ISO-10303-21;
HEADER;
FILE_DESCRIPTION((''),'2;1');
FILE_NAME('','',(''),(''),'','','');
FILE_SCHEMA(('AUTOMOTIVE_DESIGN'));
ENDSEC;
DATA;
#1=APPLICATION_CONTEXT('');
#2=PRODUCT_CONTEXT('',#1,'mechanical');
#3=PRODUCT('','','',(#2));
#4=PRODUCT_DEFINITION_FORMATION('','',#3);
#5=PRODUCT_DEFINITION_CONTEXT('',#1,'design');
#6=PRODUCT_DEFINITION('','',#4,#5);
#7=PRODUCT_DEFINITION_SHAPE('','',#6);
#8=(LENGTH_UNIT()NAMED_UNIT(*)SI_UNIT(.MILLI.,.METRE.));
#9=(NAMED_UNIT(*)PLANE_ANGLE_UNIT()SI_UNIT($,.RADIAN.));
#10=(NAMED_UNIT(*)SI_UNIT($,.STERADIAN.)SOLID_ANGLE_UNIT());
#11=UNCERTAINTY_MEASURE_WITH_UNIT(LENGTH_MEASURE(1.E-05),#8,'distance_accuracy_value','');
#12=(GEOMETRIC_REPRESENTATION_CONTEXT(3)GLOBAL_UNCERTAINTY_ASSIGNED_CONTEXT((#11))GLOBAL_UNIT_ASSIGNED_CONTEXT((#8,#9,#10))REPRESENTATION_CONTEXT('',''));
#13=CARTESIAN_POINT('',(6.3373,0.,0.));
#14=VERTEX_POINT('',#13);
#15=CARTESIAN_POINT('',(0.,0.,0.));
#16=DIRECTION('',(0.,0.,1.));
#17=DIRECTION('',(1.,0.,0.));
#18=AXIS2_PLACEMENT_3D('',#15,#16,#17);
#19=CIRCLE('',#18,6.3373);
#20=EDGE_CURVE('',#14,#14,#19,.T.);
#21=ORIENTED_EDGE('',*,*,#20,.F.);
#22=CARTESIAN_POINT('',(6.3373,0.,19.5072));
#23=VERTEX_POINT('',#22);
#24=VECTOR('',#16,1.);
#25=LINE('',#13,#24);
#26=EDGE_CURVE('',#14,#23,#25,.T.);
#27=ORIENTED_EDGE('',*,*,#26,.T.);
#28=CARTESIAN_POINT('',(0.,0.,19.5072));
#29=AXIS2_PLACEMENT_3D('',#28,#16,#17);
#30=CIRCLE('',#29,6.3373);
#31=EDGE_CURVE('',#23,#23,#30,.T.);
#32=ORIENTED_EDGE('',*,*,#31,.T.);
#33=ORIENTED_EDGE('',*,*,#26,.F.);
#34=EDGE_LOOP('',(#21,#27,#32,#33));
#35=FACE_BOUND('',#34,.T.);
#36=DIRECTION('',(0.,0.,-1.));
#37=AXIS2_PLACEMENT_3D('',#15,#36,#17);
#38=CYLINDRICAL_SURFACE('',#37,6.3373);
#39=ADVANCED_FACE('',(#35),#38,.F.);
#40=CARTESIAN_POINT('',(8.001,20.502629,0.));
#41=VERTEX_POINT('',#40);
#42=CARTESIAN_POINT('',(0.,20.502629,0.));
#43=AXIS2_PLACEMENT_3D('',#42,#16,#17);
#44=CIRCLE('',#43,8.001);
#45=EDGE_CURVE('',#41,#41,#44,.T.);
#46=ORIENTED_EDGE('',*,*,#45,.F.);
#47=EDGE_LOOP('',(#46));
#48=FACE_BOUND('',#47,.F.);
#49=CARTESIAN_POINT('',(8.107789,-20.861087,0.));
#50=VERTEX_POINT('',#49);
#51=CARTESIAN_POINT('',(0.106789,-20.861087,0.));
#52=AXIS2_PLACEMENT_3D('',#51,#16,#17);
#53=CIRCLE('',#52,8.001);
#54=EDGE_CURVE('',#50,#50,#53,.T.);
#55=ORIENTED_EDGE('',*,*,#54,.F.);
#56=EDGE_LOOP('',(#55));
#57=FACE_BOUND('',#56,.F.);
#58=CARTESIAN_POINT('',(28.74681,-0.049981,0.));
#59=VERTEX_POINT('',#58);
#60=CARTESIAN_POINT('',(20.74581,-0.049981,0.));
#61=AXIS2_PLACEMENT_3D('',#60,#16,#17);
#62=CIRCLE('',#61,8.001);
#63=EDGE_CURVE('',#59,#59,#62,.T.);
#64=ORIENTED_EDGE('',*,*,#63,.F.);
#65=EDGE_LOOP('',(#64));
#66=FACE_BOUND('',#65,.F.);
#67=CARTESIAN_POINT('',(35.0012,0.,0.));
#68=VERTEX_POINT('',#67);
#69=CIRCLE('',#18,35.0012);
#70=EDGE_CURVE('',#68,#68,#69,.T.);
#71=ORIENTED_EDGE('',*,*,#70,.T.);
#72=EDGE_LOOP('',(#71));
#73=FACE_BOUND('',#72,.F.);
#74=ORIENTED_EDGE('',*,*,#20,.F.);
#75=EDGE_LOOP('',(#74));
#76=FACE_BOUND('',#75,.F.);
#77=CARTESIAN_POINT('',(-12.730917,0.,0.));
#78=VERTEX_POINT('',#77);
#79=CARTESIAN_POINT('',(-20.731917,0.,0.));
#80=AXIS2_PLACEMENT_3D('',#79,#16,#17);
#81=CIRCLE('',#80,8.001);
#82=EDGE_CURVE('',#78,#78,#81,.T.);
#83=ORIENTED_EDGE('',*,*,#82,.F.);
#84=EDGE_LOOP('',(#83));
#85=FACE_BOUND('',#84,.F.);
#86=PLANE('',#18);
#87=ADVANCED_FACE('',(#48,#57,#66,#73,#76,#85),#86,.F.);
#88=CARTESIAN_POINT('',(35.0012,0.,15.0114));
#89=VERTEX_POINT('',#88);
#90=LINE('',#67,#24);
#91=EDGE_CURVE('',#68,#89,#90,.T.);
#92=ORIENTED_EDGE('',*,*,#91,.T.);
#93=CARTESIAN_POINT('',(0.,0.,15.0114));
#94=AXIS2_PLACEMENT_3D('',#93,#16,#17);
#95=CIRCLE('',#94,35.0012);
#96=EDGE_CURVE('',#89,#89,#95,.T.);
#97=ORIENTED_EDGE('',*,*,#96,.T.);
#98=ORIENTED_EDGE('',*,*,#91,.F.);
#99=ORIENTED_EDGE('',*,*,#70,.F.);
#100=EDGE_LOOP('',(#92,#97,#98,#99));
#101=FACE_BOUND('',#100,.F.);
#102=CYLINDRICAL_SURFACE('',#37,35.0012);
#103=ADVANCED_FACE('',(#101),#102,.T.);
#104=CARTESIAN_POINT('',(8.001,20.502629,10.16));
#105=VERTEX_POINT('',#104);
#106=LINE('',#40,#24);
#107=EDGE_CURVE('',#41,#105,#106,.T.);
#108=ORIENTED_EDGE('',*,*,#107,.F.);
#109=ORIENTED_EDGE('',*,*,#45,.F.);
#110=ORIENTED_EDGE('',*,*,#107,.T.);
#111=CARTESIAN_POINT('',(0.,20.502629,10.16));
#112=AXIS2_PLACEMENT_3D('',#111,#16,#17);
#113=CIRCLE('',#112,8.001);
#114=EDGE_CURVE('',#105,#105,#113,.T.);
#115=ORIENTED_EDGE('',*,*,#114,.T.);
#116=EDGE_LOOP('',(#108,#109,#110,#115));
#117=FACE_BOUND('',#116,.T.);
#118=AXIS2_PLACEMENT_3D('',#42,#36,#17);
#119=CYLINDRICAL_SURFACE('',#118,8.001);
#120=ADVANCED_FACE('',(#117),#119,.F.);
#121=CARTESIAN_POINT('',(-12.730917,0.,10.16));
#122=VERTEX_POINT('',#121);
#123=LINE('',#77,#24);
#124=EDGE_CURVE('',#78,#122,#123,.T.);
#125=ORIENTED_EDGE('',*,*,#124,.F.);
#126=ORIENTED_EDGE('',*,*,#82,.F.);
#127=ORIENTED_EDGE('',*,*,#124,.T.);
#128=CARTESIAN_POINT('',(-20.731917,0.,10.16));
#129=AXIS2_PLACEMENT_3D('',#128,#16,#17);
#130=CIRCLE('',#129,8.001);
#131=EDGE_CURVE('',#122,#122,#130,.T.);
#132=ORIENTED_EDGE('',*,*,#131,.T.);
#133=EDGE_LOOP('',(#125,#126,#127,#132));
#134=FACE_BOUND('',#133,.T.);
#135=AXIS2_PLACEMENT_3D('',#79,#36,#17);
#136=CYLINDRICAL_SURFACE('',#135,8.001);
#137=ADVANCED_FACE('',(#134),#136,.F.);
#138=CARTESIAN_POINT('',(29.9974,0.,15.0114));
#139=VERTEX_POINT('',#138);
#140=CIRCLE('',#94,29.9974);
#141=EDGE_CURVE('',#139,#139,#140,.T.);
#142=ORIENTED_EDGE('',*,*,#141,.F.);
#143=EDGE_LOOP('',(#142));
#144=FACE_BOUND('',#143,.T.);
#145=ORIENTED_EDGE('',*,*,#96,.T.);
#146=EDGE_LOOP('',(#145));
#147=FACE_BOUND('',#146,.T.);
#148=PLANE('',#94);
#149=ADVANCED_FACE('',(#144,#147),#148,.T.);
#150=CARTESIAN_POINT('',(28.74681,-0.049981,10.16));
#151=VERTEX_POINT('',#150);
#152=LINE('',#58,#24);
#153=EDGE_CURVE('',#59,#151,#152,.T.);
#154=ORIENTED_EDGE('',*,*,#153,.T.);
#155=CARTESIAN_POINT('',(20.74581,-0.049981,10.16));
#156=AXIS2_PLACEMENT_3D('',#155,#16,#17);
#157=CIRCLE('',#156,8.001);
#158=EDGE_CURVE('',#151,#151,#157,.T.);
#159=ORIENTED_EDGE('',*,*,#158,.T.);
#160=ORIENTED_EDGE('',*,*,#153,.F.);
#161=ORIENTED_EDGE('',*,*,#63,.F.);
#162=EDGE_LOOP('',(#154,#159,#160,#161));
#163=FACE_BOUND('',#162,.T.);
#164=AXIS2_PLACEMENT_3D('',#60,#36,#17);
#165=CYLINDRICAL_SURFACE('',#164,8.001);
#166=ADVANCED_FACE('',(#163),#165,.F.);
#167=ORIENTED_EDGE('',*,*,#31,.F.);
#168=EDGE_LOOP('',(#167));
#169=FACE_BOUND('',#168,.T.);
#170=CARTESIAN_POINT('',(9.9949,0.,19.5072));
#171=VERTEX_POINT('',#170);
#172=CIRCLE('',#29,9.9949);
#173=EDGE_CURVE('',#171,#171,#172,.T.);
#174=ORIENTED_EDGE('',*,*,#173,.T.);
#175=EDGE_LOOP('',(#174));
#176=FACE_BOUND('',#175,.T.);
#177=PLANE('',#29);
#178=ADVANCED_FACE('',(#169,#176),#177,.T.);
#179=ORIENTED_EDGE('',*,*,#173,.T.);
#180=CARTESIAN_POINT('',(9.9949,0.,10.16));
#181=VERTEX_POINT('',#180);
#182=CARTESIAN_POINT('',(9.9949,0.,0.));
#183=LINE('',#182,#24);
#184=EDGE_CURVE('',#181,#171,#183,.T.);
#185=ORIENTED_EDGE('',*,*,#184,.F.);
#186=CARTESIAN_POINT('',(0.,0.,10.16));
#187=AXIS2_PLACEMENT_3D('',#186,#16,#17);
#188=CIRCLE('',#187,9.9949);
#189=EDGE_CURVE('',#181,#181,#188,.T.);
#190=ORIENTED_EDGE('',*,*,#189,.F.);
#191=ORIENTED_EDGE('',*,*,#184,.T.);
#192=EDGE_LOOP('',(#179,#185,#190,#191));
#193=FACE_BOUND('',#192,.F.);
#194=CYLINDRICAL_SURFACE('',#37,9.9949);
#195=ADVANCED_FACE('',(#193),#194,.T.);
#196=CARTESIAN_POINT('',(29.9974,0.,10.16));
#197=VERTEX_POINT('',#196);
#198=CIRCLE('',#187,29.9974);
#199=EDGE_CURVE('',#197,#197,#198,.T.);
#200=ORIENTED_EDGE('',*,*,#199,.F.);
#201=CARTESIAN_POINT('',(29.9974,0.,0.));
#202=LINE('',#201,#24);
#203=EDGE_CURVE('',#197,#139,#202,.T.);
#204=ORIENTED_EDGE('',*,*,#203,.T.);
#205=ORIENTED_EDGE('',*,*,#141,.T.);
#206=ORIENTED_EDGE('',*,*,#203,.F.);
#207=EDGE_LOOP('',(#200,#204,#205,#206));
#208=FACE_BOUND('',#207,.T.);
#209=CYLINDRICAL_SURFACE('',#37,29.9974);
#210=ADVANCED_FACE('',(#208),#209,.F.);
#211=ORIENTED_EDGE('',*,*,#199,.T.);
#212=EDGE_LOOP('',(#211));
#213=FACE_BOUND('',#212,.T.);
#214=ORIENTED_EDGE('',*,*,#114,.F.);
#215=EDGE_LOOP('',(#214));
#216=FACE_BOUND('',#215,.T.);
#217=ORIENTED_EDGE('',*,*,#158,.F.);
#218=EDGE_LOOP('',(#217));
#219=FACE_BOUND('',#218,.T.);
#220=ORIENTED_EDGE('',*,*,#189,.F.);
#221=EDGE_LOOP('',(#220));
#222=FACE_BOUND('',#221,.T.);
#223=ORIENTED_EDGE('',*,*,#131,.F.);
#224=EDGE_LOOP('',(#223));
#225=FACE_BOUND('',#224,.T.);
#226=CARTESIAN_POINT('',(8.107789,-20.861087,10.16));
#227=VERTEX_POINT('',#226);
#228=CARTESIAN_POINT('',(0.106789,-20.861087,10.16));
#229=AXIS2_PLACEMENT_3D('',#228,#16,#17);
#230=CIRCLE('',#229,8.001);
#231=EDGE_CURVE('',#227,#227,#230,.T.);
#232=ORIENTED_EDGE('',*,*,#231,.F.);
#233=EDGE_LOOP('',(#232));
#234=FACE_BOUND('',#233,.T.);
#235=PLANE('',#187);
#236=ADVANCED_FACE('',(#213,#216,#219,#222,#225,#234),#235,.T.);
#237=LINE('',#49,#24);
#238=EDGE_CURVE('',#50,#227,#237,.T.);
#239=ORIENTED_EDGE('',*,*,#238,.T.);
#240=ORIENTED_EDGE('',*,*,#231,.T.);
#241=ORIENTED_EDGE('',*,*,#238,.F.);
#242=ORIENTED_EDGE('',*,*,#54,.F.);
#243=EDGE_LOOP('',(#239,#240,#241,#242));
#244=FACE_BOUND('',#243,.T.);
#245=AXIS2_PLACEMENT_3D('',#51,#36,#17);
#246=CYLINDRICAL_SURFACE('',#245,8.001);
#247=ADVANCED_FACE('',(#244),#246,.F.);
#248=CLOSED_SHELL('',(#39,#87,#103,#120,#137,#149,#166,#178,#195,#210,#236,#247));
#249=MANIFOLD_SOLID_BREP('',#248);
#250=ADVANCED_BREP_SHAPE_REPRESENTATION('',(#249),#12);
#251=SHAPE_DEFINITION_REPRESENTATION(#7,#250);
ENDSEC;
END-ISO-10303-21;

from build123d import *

# Parameters (mm, degrees)
F0_R     = 35.0012
F0_R_2   = 29.9974
F1_DEPTH = 15.0114
F0_R_3   = 8.001
F0_R_4   = 9.9949
F2_DEPTH = 10.16
F0_R_5   = 6.3373
F3_DEPTH = 19.5072


# Not quite as in the source:
# - a feature names something its author has since deleted; it is built from what else it names


with BuildPart() as f1:
    # F0 (on Top) → F1 (new body)
    with BuildSketch(Plane.XY):
        Circle(F0_R)
        Circle(F0_R_2, mode=Mode.SUBTRACT)
    extrude(amount=F1_DEPTH)

    # F0 (on Top) → F2 (join)
    with BuildSketch(Plane.XY):
        Circle(F0_R_2)
        with Locations((0.1067890262, -20.8610873669)):
            Circle(F0_R_3, mode=Mode.SUBTRACT)
        with Locations((20.7458101213, -0.0499814087)):
            Circle(F0_R_3, mode=Mode.SUBTRACT)
        with Locations((-20.7319166511, 0)):
            Circle(F0_R_3, mode=Mode.SUBTRACT)
        Circle(F0_R_4, mode=Mode.SUBTRACT)
        with Locations((0, 20.5026287585)):
            Circle(F0_R_3, mode=Mode.SUBTRACT)
    extrude(amount=F2_DEPTH)

    # F0 (on Top) → F3 (join)
    with BuildSketch(Plane.XY):
        Circle(F0_R_4)
        Circle(F0_R_5, mode=Mode.SUBTRACT)
    extrude(amount=F3_DEPTH)


solid = f1.part
